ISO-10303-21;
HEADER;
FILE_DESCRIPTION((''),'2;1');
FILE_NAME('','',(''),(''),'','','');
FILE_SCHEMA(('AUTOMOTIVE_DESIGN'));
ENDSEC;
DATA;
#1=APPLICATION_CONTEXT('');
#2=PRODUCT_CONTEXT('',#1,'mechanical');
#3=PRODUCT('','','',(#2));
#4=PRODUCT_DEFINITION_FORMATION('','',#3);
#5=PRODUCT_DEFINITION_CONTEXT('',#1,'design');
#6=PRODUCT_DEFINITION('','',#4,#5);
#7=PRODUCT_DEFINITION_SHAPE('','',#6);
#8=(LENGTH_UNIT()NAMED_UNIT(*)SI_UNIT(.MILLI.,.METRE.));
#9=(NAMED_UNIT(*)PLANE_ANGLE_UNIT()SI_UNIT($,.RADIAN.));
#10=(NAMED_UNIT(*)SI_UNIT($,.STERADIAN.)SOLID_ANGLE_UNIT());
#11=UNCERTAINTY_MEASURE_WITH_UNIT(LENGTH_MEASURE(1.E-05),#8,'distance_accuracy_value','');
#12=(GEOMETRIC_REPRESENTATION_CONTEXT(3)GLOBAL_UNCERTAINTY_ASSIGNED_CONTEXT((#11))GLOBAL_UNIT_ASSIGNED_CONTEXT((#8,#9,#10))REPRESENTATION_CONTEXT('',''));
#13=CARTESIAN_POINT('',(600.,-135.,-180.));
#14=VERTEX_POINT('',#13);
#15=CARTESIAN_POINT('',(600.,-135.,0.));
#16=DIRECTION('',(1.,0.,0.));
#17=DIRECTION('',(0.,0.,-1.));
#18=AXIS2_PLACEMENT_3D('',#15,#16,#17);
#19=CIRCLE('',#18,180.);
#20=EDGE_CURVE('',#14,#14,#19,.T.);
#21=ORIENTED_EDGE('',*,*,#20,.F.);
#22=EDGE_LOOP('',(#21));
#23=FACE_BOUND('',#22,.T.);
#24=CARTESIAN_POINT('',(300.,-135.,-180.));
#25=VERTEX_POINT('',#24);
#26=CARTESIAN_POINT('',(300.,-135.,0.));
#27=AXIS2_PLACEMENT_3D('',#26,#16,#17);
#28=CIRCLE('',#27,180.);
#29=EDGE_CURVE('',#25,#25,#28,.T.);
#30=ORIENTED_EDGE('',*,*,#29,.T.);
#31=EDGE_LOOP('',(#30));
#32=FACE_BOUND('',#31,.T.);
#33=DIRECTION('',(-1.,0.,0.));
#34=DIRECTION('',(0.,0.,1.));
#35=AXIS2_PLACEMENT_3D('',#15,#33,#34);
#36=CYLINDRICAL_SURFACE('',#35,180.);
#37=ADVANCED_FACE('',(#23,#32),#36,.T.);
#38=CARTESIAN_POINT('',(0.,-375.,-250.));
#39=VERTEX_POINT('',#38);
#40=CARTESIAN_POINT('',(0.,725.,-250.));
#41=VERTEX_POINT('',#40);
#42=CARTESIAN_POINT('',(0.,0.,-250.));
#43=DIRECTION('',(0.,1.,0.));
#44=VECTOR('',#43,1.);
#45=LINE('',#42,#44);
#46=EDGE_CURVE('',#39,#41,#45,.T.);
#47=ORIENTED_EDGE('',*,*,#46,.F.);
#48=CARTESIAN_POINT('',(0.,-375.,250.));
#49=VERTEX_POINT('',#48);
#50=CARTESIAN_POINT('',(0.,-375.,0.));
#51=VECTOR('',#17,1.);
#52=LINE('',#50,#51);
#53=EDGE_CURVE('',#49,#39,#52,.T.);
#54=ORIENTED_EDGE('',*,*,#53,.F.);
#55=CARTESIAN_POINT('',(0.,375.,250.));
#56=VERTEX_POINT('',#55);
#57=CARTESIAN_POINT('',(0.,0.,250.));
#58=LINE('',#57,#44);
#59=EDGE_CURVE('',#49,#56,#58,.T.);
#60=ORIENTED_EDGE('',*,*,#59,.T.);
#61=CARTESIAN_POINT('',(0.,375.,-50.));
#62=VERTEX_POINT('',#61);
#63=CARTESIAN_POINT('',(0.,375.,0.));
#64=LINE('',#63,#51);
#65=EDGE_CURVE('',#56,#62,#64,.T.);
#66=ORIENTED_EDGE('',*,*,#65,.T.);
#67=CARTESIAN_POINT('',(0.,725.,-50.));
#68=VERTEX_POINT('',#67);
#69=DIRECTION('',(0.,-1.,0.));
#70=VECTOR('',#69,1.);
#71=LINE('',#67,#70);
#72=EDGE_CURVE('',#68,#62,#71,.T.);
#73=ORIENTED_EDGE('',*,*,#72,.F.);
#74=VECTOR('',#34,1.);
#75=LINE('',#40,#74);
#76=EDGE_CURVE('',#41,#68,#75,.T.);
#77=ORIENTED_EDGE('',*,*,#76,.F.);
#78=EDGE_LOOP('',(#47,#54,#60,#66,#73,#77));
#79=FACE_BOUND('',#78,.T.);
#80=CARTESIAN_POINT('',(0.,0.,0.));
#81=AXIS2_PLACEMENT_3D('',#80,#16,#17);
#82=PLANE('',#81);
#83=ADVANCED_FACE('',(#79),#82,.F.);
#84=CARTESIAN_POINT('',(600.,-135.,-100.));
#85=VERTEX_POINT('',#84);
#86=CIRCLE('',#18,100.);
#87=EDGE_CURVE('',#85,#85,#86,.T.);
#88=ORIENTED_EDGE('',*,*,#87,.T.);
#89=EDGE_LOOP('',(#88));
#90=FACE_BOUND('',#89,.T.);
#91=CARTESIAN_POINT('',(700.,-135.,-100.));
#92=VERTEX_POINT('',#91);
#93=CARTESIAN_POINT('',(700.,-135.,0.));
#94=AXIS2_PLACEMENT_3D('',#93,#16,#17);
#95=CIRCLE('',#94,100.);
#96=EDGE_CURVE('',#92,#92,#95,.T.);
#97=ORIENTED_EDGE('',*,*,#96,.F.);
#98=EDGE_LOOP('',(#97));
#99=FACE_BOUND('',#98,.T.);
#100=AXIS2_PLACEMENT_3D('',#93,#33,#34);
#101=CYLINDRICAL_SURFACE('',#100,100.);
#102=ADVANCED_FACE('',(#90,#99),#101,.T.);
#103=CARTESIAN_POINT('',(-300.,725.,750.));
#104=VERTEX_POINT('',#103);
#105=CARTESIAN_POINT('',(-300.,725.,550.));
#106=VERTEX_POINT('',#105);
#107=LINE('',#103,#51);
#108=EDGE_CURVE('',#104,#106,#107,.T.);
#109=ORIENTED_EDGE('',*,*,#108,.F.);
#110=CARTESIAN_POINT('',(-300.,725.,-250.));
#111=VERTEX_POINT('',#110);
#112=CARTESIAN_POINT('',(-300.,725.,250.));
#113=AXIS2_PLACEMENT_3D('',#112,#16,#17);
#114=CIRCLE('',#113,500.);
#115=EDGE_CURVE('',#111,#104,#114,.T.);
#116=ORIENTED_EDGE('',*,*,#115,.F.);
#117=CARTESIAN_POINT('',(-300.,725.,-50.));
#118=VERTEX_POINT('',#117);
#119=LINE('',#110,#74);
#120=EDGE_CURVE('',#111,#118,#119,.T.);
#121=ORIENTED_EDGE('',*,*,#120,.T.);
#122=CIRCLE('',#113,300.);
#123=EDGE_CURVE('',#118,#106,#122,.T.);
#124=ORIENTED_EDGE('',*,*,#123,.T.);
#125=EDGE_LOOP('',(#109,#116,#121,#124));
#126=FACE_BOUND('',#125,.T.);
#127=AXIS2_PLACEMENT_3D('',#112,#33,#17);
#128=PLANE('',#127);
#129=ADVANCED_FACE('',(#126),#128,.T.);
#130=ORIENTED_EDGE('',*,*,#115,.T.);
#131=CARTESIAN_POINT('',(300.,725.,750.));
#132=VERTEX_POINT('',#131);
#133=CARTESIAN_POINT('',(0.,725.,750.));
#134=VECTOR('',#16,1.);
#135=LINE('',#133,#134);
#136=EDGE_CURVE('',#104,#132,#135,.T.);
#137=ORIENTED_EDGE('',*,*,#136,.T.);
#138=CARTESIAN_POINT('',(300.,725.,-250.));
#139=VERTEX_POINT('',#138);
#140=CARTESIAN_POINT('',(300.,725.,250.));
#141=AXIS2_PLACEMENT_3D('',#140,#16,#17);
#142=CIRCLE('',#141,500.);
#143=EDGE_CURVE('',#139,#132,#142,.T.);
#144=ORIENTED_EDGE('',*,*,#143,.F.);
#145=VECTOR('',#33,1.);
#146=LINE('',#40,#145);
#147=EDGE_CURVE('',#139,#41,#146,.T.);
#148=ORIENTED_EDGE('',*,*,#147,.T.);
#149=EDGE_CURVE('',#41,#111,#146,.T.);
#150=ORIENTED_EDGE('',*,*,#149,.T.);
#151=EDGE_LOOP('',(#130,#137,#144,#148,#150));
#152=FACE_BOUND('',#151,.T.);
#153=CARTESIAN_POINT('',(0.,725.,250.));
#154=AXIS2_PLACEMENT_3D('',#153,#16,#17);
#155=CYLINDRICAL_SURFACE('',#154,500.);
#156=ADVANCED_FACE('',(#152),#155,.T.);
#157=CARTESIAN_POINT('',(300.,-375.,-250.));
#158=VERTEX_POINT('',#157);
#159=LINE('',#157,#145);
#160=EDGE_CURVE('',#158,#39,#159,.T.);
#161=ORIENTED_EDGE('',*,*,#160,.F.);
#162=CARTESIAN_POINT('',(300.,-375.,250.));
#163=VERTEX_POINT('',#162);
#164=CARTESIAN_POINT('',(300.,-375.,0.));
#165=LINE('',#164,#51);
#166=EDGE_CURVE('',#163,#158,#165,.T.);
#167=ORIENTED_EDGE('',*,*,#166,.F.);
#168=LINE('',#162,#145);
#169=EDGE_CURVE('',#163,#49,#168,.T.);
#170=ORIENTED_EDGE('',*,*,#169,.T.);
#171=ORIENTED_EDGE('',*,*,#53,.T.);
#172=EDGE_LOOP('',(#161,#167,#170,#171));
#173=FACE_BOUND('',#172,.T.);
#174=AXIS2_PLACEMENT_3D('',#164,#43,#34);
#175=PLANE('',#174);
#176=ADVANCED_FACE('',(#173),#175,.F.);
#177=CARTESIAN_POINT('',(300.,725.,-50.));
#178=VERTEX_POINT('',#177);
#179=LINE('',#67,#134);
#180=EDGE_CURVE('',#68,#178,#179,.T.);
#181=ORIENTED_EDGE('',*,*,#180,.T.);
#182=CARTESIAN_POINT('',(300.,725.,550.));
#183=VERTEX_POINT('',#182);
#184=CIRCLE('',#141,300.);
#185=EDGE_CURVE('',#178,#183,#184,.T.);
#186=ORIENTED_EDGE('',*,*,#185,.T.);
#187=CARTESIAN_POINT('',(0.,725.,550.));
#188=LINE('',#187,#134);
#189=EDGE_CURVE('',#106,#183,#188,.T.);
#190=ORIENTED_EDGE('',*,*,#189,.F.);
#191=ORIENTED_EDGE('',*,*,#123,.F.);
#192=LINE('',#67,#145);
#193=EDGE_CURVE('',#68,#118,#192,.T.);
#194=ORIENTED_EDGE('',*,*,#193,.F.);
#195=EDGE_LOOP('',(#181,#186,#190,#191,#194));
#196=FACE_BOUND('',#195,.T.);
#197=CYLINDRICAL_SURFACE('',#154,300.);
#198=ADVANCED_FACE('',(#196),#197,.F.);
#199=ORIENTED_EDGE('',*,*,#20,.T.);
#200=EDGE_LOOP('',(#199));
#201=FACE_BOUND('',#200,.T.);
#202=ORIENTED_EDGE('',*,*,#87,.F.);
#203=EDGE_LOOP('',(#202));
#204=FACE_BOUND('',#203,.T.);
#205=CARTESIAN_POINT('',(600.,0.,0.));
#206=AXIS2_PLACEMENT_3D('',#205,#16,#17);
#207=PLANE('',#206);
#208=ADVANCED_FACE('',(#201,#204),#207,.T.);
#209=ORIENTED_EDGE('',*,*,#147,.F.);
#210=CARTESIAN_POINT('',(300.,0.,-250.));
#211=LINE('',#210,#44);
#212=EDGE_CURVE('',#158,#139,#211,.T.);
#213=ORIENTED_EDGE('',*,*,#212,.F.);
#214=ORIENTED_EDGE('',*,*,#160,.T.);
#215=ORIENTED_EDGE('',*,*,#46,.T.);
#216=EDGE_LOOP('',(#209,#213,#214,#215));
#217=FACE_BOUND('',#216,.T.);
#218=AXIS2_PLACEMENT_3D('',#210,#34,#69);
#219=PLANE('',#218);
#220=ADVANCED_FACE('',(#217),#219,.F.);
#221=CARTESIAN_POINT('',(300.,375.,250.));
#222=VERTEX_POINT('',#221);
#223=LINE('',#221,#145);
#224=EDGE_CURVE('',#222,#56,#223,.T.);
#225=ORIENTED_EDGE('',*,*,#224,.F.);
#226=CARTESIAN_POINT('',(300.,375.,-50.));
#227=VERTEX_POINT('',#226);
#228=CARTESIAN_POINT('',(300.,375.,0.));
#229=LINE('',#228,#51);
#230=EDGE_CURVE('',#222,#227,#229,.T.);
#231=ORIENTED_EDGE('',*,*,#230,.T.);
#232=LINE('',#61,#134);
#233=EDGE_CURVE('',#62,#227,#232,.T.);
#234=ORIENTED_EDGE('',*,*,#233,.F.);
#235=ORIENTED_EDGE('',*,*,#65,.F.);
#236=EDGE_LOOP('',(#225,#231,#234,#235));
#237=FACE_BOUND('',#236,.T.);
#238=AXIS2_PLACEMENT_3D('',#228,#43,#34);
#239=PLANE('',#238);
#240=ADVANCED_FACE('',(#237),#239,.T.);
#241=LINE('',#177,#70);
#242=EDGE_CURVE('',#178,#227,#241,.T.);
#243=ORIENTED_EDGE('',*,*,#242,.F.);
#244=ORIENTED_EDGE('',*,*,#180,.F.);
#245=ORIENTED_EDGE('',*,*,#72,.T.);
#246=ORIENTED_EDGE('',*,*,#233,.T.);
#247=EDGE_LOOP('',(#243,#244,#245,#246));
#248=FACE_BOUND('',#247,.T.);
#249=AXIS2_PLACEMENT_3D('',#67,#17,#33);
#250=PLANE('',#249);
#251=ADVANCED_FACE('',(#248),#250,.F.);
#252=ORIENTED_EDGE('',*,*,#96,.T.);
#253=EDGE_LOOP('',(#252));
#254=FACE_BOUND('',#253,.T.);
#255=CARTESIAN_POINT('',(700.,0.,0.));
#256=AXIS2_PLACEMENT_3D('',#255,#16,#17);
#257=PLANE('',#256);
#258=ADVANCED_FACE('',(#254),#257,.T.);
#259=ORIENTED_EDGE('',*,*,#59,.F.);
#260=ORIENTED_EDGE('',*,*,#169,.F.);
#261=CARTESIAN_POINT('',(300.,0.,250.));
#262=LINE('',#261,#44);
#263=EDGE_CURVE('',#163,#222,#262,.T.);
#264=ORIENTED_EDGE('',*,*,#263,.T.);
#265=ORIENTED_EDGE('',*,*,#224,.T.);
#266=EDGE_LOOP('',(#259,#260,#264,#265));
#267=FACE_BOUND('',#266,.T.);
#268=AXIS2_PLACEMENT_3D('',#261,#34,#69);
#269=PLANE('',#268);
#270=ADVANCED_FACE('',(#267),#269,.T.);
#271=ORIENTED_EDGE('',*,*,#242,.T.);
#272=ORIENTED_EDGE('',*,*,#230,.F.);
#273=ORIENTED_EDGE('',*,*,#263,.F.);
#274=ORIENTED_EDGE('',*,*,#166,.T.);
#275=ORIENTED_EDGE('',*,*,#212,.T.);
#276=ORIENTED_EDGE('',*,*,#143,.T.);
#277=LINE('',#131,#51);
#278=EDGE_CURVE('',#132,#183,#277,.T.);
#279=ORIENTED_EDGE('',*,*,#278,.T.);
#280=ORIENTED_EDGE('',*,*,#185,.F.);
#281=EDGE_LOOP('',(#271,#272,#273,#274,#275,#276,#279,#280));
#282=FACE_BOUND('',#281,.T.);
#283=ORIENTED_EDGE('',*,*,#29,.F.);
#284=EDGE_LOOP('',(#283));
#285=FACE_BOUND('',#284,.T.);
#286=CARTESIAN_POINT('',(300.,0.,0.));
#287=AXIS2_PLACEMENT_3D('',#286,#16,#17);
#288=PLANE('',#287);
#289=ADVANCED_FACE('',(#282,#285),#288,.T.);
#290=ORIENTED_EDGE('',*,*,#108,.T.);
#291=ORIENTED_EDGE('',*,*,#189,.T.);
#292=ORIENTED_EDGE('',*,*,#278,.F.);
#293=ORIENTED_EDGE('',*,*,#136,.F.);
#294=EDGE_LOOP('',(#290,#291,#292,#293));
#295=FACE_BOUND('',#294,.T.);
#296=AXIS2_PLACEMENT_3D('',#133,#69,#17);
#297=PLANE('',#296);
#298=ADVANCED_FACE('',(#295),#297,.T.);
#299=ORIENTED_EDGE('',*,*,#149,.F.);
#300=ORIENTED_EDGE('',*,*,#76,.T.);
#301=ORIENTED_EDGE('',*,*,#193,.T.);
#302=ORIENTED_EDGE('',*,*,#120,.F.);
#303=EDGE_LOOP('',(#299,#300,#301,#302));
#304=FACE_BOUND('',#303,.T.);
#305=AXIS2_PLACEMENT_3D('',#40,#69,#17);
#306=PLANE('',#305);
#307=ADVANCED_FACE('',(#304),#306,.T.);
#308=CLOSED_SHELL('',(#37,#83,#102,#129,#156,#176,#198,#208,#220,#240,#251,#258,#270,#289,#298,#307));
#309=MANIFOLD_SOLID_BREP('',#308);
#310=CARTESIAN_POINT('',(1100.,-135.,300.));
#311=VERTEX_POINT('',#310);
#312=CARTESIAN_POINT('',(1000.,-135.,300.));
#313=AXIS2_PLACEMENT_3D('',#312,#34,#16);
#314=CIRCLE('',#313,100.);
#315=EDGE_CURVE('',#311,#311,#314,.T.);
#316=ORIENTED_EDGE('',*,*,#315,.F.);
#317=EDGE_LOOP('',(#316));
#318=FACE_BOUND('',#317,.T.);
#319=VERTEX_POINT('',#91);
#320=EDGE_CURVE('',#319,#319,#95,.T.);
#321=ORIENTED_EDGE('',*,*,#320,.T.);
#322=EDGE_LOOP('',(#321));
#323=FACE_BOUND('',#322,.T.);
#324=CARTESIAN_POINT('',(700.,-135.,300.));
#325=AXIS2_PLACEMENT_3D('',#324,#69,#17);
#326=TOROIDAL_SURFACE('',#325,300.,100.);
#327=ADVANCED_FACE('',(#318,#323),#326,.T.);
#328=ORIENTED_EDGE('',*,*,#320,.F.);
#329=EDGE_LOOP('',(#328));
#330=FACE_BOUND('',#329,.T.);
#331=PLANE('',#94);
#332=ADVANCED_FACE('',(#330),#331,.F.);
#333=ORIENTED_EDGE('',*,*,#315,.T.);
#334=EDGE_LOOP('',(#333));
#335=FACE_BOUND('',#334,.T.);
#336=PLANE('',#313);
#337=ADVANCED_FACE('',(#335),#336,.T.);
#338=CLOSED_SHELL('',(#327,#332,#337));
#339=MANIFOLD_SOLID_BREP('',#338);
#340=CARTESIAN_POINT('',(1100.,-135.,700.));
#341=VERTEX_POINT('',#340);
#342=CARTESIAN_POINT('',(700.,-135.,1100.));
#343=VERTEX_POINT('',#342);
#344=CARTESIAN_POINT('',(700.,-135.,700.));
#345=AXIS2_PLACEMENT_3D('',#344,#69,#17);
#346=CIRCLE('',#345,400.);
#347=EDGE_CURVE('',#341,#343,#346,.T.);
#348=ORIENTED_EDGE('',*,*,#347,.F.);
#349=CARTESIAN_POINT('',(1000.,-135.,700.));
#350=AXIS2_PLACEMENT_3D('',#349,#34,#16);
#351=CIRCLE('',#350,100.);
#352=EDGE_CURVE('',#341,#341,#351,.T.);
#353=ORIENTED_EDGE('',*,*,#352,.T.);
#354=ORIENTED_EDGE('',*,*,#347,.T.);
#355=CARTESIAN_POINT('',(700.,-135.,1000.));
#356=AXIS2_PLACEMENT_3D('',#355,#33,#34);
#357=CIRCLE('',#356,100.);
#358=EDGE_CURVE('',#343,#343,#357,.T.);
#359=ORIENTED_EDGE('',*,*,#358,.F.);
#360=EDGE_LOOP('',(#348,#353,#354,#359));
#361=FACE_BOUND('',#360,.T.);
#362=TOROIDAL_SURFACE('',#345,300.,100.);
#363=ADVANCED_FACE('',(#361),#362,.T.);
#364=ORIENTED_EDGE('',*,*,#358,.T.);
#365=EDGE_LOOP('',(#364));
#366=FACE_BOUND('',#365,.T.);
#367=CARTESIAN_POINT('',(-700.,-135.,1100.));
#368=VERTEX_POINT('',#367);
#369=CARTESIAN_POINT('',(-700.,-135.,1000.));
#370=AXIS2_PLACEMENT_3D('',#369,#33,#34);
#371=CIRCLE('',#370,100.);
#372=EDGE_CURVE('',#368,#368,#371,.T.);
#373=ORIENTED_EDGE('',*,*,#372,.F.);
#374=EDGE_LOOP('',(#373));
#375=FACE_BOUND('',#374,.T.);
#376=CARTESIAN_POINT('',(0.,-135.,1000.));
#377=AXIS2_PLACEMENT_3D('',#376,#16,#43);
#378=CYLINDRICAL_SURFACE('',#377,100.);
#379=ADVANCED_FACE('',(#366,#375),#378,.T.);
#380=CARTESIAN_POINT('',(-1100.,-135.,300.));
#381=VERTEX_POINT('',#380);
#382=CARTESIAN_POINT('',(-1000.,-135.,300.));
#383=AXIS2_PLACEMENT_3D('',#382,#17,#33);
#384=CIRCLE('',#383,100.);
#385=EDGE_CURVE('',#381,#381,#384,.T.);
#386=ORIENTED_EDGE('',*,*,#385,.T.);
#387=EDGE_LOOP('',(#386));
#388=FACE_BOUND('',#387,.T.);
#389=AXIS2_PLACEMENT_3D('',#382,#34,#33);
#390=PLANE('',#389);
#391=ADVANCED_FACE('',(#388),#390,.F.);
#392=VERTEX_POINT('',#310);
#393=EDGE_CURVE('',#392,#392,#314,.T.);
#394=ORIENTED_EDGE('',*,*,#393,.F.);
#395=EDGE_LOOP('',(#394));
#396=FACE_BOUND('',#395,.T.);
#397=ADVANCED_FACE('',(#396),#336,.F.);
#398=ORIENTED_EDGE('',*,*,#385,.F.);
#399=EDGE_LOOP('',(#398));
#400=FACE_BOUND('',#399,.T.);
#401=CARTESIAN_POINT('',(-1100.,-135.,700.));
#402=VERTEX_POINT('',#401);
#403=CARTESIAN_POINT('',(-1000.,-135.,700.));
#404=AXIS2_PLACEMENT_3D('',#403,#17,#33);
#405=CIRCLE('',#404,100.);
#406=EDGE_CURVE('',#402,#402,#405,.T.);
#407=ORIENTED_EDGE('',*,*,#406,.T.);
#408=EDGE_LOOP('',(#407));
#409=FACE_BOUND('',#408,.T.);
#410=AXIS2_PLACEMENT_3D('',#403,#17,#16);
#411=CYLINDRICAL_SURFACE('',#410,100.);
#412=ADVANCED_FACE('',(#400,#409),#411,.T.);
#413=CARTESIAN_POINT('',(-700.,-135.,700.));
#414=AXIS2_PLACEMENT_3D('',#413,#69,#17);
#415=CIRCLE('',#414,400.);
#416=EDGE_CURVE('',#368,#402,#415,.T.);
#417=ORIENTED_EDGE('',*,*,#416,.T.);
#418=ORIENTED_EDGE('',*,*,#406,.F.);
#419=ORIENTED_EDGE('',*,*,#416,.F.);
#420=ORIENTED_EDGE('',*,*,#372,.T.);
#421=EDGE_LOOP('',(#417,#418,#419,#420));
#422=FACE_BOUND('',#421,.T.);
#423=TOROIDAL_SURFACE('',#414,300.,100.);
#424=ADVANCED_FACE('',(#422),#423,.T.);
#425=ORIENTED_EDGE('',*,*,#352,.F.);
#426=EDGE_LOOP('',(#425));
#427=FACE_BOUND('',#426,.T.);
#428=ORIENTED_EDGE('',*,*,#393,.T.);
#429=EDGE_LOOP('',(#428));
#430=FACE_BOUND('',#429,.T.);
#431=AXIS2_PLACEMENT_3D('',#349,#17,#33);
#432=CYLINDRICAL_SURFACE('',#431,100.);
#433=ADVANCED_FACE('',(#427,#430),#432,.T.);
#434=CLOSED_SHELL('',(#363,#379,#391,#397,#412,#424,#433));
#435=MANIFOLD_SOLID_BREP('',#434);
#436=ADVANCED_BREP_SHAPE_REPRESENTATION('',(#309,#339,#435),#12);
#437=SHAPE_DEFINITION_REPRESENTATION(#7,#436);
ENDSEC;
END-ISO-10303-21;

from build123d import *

# Parameters (mm, degrees)
ESBO_O1_R                 = 100
RESSALTO_EXTRUS_O2_DEPTH  = 700
ESBO_O1_9_R               = 180
ESBO_O1_9_R_2             = 100
RESSALTO_EXTRUS_O6_DEPTH  = 600
ESBO_O1_10_W              = 500
ESBO_O1_10_H              = 750
ESBO_O1_10_R              = 180
RESSALTO_EXTRUS_O7_DEPTH  = 300
ESBO_O3_W                 = 300
ESBO_O3_H                 = 200
RESSALTO_EXTRUS_O8_DEPTH  = 350
RESSALTO_EXTRUS_O9_DEPTH  = 300
VARREDURA4_OUTLINE_R      = 100
VARREDURA4_ANGLE          = 90
ESBO_O27_R                = 100
RESSALTO_EXTRUS_O16_DEPTH = 400
VARREDURA5_OUTLINE_R      = 100
VARREDURA5_ANGLE          = 90
ESBO_O33_R                = 100
RESSALTO_EXTRUS_O17_DEPTH = 700


# Read off the part's stored shape, not the designer's step: Varredura4, Varredura5
with BuildPart() as part:
    # Esboço1 → Ressalto-extrusão2 (new body)
    with BuildSketch(Plane(origin=(0, 0, 0), x_dir=(0, 0, -1), z_dir=(1, 0, 0))):
        with Locations((0, -135)):
            Circle(ESBO_O1_R)
    extrude(amount=RESSALTO_EXTRUS_O2_DEPTH)

    # Esboço1<9> → Ressalto-extrusão6 (add)
    with BuildSketch(Plane(origin=(0, 0, 0), x_dir=(0, 0, -1), z_dir=(1, 0, 0))):
        with Locations((0, -135)):
            Circle(ESBO_O1_9_R)
        with Locations((0, -135)):
            Circle(ESBO_O1_9_R_2, mode=Mode.SUBTRACT)
    extrude(amount=RESSALTO_EXTRUS_O6_DEPTH)

    # Esboço1<10> → Ressalto-extrusão7 (add)
    with BuildSketch(Plane(origin=(0, 0, 0), x_dir=(0, 0, -1), z_dir=(1, 0, 0))):
        Rectangle(ESBO_O1_10_W, ESBO_O1_10_H)
        with Locations((0, -135)):
            Circle(ESBO_O1_10_R, mode=Mode.SUBTRACT)
    extrude(amount=RESSALTO_EXTRUS_O7_DEPTH)

    # Esboço3 → Ressalto-extrusão8 (add)
    with BuildSketch(Plane(origin=(0, 375, 0), x_dir=(1, 0, 0), z_dir=(0, 1, 0))):
        with Locations((150, 150)):
            Rectangle(ESBO_O3_W, ESBO_O3_H)
    extrude(amount=RESSALTO_EXTRUS_O8_DEPTH)

    # Esboço5 → Ressalto-extrusão9 (add)
    with BuildSketch(Plane(origin=(300, 0, 0), x_dir=(0, 0, -1), z_dir=(1, 0, 0))):
        with BuildLine():
            Line((-750, 725), (-550, 725))
            ThreePointArc((-550, 725), (-250, 1025), (50, 725))
            Line((50, 725), (250, 725))
            ThreePointArc((250, 725), (-250, 1225), (-750, 725))
        make_face()
    ressalto_extrus_o9 = extrude(amount=-RESSALTO_EXTRUS_O9_DEPTH)

    # Espelhar3: Ressalto-extrusão9 across Right Plane
    add(ressalto_extrus_o9.mirror(Plane(origin=(0, 0, 0), x_dir=(0, 0, -1), z_dir=(1, 0, 0))))


with BuildPart() as body_2:
    # Varredura4 outline → Varredura4 (revolve)
    with BuildSketch(Plane(origin=(700, 0, 300), x_dir=(1, 0, 0), z_dir=(0, 0, 1))):
        with Locations((300, -135)):
            Circle(VARREDURA4_OUTLINE_R)
    revolve(axis=Axis((700, 0, 300), (0, 1, 0)), revolution_arc=VARREDURA4_ANGLE)


with BuildPart() as body_3:
    # Esboço27 → Ressalto-extrusão16 (new body)
    with BuildSketch(Plane.XY.offset(300)):
        with Locations((1000, -135)):
            Circle(ESBO_O27_R)
    ressalto_extrus_o16 = extrude(amount=RESSALTO_EXTRUS_O16_DEPTH)

    # Varredura5 outline → Varredura5 (revolve)
    with BuildSketch(Plane(origin=(700, 0, 700), x_dir=(0, 0, 1), z_dir=(-1, 0, 0))):
        with Locations((300, -135)):
            Circle(VARREDURA5_OUTLINE_R)
    varredura5 = revolve(axis=Axis((700, 0, 700), (0, 1, 0)), revolution_arc=VARREDURA5_ANGLE)

    # Esboço33 → Ressalto-extrusão17 (add)
    with BuildSketch(Plane.ZY.offset(-700)):
        with Locations((1000, -135)):
            Circle(ESBO_O33_R)
    ressalto_extrus_o17 = extrude(amount=RESSALTO_EXTRUS_O17_DEPTH)

    # Espelhar4: Ressalto-extrusão16, Varredura5, Ressalto-extrusão17 across Right Plane
    add(ressalto_extrus_o16.mirror(Plane(origin=(0, 0, 0), x_dir=(0, 0, -1), z_dir=(1, 0, 0))))
    add(varredura5.mirror(Plane(origin=(0, 0, 0), x_dir=(0, 0, -1), z_dir=(1, 0, 0))))
    add(ressalto_extrus_o17.mirror(Plane(origin=(0, 0, 0), x_dir=(0, 0, -1), z_dir=(1, 0, 0))))


solid = Compound([part.part, body_2.part, body_3.part])
